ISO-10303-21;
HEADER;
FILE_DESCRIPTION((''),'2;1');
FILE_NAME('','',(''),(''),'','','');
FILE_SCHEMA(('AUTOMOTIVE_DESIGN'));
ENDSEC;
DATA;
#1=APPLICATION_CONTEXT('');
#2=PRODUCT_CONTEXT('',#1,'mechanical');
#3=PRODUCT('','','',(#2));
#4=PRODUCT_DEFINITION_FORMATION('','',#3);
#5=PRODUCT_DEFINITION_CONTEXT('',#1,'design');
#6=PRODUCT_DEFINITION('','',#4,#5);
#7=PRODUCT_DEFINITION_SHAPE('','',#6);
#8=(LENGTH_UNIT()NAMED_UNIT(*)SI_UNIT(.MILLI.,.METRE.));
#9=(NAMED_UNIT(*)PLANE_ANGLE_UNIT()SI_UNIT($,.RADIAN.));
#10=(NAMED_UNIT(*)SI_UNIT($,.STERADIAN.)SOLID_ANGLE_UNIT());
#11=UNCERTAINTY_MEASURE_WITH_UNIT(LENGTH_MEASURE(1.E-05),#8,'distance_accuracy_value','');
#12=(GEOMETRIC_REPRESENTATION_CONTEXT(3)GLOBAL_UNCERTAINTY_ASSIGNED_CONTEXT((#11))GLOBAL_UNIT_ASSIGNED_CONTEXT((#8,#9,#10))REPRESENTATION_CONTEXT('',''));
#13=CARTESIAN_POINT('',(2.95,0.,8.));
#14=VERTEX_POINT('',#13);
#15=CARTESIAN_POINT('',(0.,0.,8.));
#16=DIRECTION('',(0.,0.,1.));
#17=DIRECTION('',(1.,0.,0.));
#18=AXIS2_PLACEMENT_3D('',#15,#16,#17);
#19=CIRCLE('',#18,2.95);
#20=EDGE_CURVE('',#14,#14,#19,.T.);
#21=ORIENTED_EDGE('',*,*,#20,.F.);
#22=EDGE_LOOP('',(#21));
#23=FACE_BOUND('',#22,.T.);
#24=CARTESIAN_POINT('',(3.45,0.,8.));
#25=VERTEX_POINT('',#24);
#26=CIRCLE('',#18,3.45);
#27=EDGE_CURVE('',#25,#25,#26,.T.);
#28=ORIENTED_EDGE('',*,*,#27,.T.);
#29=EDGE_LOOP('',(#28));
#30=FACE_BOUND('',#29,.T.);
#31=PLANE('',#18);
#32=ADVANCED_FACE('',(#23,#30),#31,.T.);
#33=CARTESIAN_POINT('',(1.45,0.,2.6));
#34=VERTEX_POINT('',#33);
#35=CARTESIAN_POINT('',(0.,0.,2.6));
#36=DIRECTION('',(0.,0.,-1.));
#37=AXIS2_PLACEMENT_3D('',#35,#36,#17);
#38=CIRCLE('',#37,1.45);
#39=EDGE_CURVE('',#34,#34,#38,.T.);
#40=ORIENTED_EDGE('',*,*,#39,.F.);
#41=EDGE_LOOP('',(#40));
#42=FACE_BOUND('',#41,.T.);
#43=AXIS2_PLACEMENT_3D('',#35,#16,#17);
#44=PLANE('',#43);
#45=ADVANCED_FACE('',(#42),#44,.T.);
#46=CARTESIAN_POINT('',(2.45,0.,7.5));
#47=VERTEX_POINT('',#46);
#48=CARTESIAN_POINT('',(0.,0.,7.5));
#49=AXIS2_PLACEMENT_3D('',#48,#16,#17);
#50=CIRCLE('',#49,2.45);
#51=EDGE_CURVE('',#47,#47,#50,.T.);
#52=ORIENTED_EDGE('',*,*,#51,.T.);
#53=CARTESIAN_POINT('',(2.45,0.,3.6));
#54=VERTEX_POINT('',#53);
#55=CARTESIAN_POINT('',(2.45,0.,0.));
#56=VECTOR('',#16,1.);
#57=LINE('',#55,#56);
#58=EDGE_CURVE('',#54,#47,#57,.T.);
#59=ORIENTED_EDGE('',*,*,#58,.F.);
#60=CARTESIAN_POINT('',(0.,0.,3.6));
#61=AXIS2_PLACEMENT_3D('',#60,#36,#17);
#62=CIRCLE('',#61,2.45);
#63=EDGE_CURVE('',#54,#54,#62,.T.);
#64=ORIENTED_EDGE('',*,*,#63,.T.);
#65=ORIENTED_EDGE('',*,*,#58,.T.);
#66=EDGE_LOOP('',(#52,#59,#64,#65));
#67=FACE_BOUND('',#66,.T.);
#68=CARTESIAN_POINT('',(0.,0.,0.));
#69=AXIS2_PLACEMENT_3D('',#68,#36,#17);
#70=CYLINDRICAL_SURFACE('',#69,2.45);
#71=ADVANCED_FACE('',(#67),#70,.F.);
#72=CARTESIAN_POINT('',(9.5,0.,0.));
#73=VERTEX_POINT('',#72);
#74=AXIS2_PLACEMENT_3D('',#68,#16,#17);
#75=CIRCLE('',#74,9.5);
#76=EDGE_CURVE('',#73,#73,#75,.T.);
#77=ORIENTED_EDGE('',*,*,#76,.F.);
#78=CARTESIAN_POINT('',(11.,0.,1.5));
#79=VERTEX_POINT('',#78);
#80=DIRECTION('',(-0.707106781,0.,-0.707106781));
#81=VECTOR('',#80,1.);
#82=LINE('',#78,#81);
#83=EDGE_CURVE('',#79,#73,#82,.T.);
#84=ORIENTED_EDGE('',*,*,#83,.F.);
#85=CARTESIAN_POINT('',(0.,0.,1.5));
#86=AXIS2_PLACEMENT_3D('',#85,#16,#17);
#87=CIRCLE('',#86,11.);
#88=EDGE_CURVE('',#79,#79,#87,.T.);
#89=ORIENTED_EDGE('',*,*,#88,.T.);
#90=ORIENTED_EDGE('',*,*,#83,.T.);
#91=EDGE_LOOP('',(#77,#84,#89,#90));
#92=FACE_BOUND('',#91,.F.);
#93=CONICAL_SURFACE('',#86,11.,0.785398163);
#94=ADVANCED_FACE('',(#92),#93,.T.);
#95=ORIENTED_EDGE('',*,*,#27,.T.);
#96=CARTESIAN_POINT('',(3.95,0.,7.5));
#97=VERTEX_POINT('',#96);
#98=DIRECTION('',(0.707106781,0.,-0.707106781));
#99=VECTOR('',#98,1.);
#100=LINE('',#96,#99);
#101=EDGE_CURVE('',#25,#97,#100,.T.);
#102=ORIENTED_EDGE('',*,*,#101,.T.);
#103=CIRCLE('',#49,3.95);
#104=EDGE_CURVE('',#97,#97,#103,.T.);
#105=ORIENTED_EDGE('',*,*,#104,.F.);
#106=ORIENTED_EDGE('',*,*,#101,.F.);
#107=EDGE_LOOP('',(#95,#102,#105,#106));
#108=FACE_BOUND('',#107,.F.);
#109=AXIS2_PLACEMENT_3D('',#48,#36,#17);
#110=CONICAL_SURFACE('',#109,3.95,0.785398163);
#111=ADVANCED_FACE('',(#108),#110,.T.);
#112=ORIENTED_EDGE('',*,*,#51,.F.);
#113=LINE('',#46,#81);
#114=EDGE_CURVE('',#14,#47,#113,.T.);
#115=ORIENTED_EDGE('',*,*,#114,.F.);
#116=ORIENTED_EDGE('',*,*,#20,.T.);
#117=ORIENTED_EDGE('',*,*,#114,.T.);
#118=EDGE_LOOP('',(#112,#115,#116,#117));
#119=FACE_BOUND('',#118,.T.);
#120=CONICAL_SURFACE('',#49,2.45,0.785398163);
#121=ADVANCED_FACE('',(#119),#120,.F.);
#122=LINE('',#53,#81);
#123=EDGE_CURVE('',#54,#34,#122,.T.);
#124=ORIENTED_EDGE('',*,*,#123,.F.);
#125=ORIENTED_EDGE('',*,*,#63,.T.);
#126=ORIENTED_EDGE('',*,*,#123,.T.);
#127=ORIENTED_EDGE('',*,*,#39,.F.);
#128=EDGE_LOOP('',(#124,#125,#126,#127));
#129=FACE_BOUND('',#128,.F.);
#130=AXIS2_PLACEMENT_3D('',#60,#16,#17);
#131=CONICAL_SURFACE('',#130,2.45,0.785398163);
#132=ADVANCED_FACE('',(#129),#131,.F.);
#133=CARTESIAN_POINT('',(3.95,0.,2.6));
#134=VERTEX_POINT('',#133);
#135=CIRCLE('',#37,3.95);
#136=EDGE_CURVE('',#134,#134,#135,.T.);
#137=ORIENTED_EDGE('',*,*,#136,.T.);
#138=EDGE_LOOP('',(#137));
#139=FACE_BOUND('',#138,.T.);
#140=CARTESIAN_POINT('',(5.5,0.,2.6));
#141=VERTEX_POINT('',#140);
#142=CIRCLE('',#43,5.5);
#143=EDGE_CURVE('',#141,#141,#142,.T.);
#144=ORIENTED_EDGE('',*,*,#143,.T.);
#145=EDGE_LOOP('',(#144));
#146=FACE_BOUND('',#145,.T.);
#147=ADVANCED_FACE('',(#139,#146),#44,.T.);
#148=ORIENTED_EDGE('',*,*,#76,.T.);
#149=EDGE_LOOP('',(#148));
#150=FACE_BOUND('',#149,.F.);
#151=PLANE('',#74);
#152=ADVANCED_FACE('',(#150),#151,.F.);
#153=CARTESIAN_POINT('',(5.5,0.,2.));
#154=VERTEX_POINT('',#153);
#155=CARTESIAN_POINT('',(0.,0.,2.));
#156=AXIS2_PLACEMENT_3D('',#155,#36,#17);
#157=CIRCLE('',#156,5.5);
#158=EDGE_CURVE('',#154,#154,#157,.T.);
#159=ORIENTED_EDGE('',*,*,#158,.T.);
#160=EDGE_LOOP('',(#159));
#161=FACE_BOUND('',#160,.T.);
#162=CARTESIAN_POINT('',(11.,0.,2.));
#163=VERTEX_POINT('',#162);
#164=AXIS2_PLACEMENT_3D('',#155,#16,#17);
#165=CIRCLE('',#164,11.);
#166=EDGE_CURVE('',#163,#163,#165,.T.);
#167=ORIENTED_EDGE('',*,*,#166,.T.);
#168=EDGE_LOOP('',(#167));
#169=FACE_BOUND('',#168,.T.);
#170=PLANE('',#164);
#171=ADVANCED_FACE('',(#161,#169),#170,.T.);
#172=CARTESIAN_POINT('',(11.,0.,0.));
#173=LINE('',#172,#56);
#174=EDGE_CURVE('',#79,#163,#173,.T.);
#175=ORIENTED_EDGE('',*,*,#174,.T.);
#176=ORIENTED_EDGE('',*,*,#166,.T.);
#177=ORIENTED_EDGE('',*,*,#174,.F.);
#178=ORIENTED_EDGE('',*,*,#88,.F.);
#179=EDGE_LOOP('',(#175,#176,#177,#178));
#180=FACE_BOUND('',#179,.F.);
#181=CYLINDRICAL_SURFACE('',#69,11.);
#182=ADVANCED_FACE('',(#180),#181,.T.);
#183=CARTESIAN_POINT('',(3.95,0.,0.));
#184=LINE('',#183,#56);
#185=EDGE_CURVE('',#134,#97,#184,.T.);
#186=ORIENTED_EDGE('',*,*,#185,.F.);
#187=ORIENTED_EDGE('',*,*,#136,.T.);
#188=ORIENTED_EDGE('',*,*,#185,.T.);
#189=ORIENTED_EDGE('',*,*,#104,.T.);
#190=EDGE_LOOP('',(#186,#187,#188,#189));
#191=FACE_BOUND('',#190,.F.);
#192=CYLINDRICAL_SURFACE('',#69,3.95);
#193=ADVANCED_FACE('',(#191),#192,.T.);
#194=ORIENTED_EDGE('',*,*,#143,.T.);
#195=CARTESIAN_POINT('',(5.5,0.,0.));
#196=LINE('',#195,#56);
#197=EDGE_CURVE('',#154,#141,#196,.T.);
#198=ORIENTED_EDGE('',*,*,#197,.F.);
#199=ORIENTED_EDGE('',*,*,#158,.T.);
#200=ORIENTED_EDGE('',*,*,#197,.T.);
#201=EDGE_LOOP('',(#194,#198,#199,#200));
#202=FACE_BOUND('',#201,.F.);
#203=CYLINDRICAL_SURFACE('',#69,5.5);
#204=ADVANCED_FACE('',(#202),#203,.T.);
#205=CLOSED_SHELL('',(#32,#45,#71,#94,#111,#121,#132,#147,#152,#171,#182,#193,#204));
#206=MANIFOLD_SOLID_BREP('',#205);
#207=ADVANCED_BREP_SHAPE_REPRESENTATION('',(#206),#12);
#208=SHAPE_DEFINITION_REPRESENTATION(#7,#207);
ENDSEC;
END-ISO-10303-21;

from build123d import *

# Parameters (mm, degrees)
F0_R     = 11
F0_R_2   = 5.5
F0_R_3   = 3.95
F0_R_4   = 2.45
F1_DEPTH = 2
F2_DEPTH = 2.6
F3_DEPTH = 8
F4_SIZE  = 0.5
F5_SIZE  = 0.5
F6_SIZE  = 1.5
F7_SIZE  = 1


# Not quite as in the source:
# - a feature names something its author has since deleted; it is built from what else it names


with BuildPart() as f1:
    # F0 (on Top) → F1 (new body)
    with BuildSketch(Plane.XY):
        Circle(F0_R)
        Circle(F0_R_2, mode=Mode.SUBTRACT)
        Circle(F0_R_2)
        Circle(F0_R_3, mode=Mode.SUBTRACT)
        Circle(F0_R_3)
        Circle(F0_R_4, mode=Mode.SUBTRACT)
        Circle(F0_R_4)
    extrude(amount=F1_DEPTH)

    # F0 (on Top) → F2 (join)
    with BuildSketch(Plane.XY):
        Circle(F0_R_2)
        Circle(F0_R_3, mode=Mode.SUBTRACT)
        Circle(F0_R_3)
        Circle(F0_R_4, mode=Mode.SUBTRACT)
        Circle(F0_R_4)
    extrude(amount=F2_DEPTH)

    # F0 (on Top) → F3 (join)
    with BuildSketch(Plane.XY):
        Circle(F0_R_3)
        Circle(F0_R_4, mode=Mode.SUBTRACT)
    extrude(amount=F3_DEPTH)

    # F4
    f4_edges = [f1.edges().sort_by_distance(p)[0] for p in [
        (-2.45, 0, 8),
    ]]
    chamfer(f4_edges, length=F4_SIZE)

    # F5
    f5_edges = [f1.edges().sort_by_distance(p)[0] for p in [
        (-3.95, 0, 8),
    ]]
    chamfer(f5_edges, length=F5_SIZE)

    # F6
    f6_edges = [f1.edges().sort_by_distance(p)[0] for p in [
        (-11, 0, 0),
    ]]
    chamfer(f6_edges, length=F6_SIZE)

    # F7
    f7_edges = [f1.edges().sort_by_distance(p)[0] for p in [
        (-2.45, 0, 2.6),
    ]]
    chamfer(f7_edges, length=F7_SIZE)


solid = f1.part
